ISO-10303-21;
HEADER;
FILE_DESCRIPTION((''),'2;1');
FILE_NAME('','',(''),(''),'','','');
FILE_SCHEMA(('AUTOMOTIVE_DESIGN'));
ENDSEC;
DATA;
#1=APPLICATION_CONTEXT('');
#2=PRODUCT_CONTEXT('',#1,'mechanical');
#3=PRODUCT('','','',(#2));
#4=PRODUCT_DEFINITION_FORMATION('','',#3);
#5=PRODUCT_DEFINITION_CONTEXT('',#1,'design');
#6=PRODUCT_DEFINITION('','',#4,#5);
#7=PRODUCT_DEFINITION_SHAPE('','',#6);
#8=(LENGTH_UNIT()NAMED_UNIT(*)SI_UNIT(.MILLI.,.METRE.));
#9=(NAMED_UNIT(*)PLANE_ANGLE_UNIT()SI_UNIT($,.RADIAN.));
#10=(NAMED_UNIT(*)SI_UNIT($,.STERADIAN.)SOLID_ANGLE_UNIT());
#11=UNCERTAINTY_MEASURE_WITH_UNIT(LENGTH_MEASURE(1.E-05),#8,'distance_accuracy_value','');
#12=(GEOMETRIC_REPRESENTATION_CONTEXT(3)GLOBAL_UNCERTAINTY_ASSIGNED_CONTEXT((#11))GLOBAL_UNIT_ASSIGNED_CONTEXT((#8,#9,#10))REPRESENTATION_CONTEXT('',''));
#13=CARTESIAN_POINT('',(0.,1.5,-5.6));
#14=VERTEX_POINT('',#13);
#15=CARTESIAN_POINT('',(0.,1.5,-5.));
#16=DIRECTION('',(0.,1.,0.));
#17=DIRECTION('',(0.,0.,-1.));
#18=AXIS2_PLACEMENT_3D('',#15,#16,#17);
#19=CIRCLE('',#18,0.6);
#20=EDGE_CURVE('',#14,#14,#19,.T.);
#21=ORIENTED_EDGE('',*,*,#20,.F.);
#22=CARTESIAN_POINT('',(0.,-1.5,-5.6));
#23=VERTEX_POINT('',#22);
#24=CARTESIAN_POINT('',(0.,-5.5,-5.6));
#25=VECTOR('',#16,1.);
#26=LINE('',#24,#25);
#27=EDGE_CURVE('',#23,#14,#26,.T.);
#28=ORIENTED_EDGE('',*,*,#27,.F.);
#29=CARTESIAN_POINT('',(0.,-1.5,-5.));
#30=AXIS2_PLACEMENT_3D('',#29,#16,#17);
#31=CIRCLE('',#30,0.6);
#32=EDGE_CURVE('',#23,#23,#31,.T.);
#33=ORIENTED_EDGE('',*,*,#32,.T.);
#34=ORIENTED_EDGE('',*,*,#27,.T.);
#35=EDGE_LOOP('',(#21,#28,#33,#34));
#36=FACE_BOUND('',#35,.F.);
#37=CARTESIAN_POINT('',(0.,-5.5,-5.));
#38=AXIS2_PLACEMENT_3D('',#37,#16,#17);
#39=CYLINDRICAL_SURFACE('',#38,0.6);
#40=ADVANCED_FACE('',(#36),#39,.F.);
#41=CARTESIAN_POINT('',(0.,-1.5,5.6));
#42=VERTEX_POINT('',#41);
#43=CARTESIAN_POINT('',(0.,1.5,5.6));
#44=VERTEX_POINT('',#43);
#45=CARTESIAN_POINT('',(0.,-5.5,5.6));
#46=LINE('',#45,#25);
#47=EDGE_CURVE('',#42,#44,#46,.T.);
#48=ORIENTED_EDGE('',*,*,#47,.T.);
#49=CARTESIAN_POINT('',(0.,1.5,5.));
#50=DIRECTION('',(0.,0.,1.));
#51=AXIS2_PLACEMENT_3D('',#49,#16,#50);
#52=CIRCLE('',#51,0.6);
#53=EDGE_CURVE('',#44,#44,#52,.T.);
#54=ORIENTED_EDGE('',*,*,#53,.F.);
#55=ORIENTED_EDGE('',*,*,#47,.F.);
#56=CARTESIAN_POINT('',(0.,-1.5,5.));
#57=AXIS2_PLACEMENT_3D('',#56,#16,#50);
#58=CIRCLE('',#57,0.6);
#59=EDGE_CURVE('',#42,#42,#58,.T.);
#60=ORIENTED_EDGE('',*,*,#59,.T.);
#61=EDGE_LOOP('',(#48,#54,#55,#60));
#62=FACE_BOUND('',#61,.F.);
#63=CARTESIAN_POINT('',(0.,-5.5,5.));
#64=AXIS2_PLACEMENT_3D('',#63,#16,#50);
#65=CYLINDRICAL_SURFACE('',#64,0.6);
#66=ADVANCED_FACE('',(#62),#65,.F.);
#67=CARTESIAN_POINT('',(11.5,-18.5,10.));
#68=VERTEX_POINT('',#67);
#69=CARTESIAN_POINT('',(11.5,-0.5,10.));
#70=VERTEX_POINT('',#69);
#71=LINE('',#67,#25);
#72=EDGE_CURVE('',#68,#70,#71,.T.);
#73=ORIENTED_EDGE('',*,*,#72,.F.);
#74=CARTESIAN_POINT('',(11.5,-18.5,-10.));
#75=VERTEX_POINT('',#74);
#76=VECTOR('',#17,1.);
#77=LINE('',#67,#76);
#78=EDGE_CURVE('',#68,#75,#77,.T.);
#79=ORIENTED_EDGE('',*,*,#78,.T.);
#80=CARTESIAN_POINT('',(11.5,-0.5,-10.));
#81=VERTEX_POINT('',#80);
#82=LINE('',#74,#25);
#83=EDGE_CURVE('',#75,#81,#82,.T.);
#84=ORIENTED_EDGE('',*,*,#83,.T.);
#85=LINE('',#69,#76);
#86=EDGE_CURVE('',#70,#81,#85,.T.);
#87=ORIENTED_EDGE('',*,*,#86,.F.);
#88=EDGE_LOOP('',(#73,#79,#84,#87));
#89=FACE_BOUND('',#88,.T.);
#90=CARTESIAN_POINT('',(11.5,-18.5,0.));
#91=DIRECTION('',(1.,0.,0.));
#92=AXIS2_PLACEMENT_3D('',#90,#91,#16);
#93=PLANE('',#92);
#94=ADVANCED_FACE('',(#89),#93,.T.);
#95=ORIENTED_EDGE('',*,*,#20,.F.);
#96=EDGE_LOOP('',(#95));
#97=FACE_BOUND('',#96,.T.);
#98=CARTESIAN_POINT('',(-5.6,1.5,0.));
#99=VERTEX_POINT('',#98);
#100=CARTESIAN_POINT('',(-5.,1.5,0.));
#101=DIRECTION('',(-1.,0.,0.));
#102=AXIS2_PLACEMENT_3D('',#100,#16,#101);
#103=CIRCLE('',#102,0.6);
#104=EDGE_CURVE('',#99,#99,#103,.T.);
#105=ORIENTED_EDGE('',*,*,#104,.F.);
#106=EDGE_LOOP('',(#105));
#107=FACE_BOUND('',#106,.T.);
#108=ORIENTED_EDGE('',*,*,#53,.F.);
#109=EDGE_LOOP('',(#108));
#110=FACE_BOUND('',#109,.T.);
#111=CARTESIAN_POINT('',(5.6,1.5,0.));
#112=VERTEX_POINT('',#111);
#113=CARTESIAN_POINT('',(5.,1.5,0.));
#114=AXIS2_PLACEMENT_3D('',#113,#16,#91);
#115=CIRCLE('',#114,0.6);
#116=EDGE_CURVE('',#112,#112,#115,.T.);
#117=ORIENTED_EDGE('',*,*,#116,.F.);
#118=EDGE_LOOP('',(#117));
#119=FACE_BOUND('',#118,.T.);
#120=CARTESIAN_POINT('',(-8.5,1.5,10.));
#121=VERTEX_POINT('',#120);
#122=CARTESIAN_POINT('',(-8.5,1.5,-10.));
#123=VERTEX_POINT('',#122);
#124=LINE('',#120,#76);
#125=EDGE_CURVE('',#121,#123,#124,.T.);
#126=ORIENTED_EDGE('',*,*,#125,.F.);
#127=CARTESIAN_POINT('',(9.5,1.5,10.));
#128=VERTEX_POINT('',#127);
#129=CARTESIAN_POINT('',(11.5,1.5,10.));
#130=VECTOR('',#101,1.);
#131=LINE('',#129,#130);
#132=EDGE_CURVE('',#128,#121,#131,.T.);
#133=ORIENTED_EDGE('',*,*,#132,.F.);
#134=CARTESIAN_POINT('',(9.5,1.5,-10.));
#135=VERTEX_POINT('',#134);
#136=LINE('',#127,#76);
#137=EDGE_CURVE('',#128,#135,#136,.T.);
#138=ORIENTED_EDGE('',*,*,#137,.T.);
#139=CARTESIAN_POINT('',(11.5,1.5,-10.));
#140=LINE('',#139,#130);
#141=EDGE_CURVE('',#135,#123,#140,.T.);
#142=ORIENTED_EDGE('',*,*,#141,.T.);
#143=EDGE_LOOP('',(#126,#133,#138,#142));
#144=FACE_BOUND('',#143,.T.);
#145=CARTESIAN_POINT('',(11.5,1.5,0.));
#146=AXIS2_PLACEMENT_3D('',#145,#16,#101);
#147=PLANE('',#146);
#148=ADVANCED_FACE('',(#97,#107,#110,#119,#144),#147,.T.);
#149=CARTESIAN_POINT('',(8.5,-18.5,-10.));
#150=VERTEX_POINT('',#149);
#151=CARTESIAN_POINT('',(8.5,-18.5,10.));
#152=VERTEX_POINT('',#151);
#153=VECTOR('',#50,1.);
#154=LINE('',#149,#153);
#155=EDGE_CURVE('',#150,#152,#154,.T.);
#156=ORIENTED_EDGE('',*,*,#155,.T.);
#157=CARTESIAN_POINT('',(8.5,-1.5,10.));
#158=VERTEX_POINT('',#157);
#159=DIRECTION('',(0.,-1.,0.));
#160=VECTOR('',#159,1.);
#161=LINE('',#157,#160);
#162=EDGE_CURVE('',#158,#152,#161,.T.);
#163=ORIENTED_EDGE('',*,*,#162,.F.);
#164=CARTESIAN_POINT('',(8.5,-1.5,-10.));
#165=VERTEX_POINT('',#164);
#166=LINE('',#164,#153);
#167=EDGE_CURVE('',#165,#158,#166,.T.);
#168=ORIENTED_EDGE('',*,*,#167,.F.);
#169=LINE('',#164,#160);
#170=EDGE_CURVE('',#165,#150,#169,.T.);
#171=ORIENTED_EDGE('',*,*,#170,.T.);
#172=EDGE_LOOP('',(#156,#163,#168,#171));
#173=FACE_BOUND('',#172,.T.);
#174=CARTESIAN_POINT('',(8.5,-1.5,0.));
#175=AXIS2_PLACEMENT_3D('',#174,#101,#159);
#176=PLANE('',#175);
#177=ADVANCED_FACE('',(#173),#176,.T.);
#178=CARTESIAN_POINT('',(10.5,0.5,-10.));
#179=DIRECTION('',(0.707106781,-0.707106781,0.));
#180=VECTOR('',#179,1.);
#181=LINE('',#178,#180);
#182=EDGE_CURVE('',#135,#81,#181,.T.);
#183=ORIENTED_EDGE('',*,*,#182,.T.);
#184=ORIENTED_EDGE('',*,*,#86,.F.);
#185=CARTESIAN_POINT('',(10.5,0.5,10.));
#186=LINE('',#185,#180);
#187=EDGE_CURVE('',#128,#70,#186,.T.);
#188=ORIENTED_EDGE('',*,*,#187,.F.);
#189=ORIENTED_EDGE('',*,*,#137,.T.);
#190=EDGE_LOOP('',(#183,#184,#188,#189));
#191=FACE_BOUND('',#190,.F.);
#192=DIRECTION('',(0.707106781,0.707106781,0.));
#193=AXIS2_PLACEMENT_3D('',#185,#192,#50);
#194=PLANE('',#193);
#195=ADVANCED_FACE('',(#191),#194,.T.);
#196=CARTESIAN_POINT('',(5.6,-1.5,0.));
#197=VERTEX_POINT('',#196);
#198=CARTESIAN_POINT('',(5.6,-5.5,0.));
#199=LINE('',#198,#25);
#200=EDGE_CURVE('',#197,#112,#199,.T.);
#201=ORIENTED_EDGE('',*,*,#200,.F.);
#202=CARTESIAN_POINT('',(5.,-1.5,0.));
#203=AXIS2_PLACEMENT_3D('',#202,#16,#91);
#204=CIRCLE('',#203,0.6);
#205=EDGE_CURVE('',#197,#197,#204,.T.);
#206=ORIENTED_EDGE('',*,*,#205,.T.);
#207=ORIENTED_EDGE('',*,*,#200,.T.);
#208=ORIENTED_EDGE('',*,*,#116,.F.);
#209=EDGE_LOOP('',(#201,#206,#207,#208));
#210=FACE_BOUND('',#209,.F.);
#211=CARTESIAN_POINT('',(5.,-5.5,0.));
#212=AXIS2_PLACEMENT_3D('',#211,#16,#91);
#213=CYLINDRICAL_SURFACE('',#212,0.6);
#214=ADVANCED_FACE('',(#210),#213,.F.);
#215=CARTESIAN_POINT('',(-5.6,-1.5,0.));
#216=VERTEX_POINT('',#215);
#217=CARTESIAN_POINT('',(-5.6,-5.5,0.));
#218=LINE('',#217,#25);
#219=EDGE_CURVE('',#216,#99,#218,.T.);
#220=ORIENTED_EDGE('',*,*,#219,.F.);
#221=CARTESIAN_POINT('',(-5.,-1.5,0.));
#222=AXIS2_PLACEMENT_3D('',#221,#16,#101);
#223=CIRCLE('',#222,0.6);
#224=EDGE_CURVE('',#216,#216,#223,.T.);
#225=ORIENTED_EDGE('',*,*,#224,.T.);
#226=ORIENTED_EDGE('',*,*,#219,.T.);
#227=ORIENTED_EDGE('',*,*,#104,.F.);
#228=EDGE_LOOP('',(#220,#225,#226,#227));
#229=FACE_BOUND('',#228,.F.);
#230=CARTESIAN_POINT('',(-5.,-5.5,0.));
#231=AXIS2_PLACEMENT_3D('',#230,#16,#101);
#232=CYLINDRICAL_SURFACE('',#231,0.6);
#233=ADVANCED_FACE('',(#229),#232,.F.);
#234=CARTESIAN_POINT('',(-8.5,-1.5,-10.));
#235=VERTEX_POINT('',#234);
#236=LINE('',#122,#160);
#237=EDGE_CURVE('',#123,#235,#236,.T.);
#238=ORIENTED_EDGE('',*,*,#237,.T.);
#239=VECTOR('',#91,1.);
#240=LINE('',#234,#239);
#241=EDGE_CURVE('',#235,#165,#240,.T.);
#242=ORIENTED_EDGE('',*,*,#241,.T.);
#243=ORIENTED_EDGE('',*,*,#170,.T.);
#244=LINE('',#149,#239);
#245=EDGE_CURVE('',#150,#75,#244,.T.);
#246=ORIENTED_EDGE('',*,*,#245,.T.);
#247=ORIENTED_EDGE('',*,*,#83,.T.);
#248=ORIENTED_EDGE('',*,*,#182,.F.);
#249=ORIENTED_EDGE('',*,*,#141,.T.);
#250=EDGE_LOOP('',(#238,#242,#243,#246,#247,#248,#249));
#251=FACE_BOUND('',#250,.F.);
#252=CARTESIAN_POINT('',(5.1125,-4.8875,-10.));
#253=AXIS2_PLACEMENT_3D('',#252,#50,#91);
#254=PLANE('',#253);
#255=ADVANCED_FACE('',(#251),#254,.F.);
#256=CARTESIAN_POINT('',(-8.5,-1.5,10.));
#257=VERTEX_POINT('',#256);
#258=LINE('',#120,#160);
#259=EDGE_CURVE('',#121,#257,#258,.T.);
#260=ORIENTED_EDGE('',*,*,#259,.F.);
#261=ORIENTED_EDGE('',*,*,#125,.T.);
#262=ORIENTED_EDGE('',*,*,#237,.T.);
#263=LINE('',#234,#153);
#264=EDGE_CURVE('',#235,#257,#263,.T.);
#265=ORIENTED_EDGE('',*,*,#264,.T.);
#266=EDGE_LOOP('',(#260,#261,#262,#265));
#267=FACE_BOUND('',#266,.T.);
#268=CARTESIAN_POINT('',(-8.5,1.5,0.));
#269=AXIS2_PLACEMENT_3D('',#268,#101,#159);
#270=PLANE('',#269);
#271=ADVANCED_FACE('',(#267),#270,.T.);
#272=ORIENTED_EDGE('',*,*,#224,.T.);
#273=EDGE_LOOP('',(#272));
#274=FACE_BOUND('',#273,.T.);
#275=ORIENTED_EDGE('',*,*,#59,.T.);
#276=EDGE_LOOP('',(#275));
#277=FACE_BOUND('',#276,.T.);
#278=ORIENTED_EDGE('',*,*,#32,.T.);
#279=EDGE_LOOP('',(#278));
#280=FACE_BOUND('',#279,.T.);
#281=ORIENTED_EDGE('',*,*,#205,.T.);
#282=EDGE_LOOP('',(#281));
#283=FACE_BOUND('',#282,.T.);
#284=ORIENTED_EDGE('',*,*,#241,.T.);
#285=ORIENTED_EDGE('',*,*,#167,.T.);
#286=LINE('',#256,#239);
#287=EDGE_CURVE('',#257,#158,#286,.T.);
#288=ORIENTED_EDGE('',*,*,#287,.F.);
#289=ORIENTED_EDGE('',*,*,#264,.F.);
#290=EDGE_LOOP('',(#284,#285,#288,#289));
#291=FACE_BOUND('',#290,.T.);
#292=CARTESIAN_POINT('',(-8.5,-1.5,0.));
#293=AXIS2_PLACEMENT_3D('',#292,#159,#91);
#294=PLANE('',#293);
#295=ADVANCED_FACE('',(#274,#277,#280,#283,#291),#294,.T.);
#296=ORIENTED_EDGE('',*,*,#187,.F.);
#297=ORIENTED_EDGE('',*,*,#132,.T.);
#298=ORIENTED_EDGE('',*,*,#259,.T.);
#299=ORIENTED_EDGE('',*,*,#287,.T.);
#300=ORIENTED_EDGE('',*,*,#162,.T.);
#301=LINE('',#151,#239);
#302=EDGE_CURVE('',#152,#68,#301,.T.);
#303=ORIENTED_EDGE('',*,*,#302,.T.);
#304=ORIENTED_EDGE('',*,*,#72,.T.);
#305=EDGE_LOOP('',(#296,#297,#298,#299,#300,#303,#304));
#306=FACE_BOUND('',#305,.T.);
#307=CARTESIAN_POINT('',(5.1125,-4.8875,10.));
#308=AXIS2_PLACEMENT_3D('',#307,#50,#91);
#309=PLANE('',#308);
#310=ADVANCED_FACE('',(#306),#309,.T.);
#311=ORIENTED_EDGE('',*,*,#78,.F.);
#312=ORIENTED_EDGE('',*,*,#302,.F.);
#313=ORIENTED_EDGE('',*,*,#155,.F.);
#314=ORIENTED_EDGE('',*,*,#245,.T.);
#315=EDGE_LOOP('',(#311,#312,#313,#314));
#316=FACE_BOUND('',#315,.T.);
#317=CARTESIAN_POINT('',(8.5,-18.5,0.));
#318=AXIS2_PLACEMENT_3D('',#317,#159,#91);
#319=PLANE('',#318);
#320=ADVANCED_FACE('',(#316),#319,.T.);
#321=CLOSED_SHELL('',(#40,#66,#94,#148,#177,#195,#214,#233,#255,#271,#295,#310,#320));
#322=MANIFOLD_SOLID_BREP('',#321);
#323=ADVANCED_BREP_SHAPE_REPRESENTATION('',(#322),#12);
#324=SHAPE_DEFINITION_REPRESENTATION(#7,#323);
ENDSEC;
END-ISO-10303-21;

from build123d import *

# Parameters (mm, degrees)
F1_DEPTH        = 10
F2_SIZE         = 2
F4_D            = 1.2
F4_DEPTH        = 4
F4_TIP          = 0.3605163714
F4_COPIES_COUNT = 4


# Not quite as in the source:
# - a pattern or mirror of a feature is missing from the dataset's text; its kind, count and spacing are read off the source's solid


with BuildPart() as f1:
    # F0 (on Top) → F1 (new body, symmetric)
    with BuildSketch(Plane.XY):
        Polygon((8.5, 1.5), (-8.5, 1.5), (-8.5, -1.5), (8.5, -1.5), (8.5, -18.5), (11.5, -18.5), (11.5, 1.5), align=None)
    extrude(amount=F1_DEPTH, both=True)

    # F2
    f2_edges = [f1.edges().sort_by_distance(p)[0] for p in [
        (11.5, 1.5, 0),
    ]]
    chamfer(f2_edges, length=F2_SIZE)

    # F4
    with Locations(Plane.XZ.offset(1.5)):
        with Locations((-5, 0)):
            f4 = Hole(F4_D / 2, depth=F4_DEPTH)
            with Locations((0, 0, -(F4_DEPTH + F4_TIP / 2))):  # 118° drill point
                Cone(0, F4_D / 2, F4_TIP, mode=Mode.SUBTRACT)

    # F4_copies: F4 ×4 about axis
    f4_copies_axis = Axis((0, 0, 0), (0, 1, 0))
    for i in range(1, F4_COPIES_COUNT):
        add(f4.rotate(f4_copies_axis, i * 360 / F4_COPIES_COUNT), mode=Mode.SUBTRACT)


solid = f1.part
